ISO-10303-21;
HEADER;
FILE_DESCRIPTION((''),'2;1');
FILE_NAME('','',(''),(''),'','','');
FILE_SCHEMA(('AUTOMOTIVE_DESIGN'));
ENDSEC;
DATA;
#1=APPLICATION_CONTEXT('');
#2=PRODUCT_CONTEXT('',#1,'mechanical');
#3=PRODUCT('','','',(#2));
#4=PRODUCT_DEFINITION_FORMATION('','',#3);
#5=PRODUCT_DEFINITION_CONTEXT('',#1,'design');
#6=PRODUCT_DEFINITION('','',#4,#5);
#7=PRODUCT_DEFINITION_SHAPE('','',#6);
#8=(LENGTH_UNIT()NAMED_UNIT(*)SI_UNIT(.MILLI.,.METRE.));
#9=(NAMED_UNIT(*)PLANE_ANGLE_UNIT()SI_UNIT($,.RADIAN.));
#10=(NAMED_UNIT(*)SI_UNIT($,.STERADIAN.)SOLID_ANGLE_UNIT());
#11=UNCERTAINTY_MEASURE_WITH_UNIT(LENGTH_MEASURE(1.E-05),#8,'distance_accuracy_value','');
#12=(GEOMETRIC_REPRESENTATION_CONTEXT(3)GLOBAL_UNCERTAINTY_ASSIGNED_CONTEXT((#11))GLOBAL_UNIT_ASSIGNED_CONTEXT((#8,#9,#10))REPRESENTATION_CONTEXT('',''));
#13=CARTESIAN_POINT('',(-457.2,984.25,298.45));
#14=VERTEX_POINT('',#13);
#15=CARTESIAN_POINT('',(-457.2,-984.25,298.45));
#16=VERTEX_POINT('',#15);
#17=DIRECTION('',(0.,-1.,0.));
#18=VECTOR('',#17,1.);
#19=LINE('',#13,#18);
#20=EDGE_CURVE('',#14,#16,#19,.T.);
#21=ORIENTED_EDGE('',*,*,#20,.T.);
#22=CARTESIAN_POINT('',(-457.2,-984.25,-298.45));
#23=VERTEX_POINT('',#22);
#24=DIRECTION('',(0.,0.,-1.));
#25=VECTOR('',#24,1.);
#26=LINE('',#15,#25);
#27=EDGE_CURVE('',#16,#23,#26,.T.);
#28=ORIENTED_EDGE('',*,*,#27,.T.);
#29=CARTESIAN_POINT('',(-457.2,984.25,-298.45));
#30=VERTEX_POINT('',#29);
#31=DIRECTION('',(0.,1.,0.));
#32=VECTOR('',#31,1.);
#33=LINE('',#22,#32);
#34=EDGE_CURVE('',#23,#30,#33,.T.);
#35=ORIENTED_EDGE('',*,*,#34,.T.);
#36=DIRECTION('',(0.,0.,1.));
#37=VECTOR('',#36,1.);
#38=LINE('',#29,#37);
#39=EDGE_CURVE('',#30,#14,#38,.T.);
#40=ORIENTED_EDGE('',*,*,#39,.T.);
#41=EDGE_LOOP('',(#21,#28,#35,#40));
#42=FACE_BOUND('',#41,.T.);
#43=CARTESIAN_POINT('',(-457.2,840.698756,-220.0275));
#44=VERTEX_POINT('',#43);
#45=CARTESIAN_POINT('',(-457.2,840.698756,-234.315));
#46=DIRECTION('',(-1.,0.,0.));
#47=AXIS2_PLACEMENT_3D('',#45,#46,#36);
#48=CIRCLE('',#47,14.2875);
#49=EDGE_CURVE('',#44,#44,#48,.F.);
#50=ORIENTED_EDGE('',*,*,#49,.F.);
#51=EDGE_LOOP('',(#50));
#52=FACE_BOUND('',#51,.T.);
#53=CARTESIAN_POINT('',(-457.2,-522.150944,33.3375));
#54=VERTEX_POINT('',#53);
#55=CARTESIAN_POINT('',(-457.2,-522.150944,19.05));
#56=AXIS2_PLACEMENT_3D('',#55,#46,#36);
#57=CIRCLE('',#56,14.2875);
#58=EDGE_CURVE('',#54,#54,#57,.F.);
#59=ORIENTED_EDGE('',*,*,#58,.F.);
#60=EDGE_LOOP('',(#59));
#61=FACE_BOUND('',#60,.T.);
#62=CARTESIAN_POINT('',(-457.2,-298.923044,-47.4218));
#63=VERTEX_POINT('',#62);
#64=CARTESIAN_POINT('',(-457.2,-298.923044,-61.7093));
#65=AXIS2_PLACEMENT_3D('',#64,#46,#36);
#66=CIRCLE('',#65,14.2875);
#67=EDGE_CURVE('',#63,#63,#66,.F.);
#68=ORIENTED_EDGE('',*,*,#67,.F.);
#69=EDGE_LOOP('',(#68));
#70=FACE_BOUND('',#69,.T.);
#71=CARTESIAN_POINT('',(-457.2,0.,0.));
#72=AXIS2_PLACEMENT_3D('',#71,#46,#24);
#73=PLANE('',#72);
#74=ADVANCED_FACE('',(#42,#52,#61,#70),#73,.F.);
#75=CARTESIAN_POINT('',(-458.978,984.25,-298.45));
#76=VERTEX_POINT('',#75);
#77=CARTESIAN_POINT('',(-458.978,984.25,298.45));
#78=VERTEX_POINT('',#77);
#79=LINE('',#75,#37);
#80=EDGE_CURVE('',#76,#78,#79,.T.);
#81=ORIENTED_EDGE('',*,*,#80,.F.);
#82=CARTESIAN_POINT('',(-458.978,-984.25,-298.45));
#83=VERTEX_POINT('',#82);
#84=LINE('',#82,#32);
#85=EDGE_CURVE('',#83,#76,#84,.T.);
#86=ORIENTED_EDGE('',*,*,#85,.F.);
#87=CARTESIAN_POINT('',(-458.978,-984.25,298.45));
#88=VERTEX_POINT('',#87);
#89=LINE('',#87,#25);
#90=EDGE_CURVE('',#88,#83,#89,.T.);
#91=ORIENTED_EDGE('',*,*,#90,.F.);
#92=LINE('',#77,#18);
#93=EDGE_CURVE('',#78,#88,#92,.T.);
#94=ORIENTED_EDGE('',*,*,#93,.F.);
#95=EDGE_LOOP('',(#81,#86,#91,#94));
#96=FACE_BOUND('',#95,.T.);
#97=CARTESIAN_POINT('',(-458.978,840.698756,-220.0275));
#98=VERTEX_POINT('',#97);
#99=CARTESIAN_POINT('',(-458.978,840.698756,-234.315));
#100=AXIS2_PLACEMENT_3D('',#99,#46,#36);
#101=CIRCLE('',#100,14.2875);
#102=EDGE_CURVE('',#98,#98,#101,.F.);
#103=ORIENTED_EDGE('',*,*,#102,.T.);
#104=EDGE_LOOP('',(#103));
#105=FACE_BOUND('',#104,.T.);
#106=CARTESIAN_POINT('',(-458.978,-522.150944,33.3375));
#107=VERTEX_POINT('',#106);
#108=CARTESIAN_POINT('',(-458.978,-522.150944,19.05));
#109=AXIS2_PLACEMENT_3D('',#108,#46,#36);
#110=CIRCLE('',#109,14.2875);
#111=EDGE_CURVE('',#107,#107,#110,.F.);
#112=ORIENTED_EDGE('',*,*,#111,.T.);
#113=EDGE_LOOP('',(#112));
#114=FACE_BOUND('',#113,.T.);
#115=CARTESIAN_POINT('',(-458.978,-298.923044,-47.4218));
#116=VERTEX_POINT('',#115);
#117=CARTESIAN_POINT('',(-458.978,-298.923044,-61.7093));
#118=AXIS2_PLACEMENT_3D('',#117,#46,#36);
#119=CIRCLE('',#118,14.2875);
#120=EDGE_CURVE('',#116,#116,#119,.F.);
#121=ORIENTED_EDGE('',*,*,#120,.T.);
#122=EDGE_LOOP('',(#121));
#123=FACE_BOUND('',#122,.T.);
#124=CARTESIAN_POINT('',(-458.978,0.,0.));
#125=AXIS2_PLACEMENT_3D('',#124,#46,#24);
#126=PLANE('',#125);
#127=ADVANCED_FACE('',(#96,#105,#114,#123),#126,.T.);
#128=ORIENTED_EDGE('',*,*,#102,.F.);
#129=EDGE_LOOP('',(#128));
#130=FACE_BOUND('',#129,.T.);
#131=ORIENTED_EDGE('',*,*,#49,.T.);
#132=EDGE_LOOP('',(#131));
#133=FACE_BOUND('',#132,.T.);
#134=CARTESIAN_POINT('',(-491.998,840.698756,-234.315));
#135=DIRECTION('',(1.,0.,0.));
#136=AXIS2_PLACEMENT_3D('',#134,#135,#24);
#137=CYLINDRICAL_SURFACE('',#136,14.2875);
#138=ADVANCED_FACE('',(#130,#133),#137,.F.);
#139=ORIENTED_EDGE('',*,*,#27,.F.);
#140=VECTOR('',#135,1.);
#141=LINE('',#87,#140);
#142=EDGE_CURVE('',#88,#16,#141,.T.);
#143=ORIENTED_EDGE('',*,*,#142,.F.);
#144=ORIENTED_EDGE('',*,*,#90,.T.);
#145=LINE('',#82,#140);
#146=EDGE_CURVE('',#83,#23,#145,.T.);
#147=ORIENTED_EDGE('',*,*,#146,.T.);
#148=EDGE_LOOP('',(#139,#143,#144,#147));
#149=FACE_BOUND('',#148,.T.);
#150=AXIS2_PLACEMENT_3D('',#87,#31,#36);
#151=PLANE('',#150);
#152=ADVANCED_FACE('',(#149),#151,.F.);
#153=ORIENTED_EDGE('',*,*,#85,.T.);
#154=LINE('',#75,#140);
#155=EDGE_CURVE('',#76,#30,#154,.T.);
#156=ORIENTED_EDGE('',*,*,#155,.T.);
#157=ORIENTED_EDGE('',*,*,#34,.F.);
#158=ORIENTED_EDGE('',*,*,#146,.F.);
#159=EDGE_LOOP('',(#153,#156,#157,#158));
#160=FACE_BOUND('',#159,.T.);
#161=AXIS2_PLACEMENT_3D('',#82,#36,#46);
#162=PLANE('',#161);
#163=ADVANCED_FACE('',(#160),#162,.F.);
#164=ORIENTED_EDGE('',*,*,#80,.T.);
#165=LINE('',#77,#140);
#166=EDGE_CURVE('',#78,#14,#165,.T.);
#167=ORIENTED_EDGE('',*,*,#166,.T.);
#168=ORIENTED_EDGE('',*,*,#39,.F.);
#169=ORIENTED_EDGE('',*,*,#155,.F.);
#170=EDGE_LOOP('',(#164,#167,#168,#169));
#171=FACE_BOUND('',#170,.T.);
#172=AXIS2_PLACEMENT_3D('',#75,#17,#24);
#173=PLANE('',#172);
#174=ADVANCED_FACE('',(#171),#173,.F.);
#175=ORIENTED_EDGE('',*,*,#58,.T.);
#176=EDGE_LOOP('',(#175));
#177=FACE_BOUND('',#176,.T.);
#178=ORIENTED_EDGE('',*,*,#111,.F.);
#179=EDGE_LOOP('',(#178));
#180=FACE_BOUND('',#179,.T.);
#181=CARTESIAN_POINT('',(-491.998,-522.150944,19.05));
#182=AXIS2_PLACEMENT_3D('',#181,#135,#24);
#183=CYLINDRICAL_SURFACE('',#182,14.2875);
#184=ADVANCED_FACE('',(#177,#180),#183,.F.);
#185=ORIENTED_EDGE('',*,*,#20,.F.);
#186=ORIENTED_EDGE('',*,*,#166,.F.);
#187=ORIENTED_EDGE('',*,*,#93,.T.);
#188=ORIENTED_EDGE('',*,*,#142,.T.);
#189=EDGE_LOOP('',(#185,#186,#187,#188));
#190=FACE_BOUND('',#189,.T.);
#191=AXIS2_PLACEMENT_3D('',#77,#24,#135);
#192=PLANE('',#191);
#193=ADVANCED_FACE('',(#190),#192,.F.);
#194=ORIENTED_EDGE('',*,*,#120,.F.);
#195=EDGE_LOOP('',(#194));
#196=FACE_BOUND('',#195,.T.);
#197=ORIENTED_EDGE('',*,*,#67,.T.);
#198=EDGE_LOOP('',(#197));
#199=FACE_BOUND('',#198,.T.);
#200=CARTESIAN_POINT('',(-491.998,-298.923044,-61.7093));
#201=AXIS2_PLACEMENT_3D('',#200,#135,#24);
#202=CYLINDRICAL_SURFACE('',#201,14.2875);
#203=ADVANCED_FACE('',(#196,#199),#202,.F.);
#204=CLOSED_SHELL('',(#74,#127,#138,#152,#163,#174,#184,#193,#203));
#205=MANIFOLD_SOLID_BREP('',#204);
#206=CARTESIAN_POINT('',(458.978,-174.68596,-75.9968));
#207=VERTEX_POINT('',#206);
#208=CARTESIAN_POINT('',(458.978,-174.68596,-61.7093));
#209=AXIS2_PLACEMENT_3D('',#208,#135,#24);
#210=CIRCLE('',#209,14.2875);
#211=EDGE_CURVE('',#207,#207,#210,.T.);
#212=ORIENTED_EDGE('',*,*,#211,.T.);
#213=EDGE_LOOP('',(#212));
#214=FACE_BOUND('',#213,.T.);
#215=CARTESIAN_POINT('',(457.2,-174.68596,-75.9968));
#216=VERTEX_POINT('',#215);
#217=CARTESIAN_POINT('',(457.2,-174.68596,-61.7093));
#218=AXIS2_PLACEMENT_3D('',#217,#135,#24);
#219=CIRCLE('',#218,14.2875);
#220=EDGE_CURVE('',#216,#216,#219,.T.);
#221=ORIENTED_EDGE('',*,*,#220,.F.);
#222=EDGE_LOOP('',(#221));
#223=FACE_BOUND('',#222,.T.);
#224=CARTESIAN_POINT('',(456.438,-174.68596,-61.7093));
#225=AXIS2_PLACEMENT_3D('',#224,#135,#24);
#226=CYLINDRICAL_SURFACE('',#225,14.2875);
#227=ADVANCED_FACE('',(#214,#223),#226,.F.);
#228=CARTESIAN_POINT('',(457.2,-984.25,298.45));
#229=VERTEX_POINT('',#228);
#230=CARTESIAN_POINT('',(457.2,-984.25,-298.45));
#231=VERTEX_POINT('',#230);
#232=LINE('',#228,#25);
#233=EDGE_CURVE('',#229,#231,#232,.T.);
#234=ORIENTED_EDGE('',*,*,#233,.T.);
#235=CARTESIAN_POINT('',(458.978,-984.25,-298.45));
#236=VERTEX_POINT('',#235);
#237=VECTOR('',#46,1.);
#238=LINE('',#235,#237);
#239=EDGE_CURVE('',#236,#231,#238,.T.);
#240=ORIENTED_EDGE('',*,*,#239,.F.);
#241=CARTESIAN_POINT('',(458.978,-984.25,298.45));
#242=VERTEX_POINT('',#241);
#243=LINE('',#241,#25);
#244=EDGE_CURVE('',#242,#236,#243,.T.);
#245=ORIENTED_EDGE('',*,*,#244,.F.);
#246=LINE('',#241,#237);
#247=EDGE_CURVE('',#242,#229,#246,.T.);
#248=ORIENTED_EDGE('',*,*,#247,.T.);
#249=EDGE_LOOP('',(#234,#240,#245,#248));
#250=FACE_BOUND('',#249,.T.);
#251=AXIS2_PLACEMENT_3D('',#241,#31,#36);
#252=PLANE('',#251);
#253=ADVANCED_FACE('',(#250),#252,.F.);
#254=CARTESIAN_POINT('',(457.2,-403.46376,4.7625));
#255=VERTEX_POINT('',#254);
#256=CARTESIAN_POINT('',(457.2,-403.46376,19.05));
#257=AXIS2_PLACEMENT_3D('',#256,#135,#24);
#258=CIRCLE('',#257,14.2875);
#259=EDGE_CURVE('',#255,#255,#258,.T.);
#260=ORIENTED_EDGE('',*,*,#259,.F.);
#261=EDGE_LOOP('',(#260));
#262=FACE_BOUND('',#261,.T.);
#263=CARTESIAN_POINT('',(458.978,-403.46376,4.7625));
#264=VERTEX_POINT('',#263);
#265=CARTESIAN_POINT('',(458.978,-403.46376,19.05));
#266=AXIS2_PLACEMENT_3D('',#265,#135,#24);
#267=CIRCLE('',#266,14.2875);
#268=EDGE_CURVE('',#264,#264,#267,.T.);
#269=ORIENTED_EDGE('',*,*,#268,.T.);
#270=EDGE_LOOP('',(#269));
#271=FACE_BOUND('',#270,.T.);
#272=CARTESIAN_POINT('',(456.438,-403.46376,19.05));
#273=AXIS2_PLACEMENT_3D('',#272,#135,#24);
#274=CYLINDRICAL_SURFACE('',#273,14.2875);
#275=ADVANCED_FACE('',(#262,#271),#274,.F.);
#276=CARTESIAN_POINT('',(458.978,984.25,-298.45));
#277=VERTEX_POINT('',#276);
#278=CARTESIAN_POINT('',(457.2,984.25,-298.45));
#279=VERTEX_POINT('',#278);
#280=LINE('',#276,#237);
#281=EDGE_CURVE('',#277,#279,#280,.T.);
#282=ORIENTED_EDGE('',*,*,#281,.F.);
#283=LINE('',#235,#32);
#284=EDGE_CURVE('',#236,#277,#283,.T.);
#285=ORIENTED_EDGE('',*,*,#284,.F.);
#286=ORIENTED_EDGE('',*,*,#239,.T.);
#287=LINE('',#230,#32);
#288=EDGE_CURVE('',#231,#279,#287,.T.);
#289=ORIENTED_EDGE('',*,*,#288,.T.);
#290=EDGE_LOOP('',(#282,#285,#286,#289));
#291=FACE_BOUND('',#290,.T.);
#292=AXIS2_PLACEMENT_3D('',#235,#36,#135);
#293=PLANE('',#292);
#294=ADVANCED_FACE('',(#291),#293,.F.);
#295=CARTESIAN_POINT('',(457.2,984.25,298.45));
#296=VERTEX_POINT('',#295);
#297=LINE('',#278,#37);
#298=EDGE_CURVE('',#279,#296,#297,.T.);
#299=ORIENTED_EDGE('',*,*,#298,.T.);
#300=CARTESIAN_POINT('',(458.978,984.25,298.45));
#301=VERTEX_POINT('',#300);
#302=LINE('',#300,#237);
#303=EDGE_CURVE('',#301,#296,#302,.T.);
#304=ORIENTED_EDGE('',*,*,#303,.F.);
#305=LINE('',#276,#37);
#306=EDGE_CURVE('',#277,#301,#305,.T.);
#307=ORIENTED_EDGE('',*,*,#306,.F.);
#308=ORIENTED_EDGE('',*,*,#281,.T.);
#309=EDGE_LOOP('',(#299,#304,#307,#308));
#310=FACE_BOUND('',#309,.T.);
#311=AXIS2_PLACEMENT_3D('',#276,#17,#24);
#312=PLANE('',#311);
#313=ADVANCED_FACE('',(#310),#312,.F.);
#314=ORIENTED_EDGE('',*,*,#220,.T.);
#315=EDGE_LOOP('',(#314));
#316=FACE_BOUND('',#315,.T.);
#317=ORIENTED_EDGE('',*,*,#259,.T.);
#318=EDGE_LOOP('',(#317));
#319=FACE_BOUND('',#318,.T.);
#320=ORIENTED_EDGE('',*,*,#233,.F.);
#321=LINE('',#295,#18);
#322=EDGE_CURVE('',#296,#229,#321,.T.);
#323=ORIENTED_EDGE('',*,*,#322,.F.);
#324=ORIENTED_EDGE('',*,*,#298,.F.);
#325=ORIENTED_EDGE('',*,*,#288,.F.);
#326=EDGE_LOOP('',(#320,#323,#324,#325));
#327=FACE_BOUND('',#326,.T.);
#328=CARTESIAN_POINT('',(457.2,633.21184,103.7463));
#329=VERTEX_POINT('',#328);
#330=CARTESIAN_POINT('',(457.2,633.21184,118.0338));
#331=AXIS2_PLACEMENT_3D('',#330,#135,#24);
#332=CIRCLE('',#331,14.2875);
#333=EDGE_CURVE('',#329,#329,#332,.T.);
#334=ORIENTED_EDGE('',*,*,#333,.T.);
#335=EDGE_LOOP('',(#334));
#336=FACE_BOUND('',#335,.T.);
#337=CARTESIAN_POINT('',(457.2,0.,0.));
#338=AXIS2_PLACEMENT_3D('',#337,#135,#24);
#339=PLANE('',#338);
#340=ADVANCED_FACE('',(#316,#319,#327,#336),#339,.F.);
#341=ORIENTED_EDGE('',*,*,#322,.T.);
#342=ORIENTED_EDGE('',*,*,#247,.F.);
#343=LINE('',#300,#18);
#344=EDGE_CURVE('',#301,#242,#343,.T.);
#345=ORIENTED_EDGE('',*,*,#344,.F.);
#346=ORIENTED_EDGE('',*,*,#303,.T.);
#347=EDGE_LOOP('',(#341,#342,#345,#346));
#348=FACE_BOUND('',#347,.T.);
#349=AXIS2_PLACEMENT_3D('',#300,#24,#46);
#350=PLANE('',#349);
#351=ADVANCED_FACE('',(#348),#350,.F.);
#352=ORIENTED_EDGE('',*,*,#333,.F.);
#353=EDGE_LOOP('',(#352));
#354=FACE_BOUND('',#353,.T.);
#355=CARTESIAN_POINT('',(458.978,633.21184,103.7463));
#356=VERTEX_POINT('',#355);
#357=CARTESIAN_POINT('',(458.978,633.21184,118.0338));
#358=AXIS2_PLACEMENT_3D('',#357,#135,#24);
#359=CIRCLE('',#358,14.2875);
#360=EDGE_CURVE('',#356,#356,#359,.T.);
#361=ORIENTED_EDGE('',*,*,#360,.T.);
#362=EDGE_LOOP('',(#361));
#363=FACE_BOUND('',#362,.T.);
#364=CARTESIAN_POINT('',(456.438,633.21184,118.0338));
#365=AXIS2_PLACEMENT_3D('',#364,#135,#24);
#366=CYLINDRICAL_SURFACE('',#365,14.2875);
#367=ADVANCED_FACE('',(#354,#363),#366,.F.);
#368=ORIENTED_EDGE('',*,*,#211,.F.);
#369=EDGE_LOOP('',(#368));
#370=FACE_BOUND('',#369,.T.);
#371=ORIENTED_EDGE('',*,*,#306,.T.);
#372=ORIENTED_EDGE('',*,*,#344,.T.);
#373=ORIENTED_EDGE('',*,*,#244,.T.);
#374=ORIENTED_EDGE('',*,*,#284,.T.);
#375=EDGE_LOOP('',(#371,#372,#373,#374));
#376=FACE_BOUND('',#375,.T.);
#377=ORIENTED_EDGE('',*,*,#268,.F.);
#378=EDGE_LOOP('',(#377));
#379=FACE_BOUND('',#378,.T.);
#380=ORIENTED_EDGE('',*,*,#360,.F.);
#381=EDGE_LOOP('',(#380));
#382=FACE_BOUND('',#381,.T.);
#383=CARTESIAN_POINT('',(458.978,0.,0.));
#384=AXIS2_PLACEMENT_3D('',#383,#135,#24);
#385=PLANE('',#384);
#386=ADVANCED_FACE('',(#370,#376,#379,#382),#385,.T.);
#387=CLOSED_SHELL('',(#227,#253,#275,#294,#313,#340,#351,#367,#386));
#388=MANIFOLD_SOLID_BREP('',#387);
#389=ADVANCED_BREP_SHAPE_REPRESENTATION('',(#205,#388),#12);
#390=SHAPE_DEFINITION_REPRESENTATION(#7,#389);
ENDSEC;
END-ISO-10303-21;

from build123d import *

# Parameters (mm, degrees)
BOSS_EXTRUDE1_OUTLINE_W = 596.9
BOSS_EXTRUDE1_OUTLINE_H = 1968.5
BOSS_EXTRUDE1_DEPTH     = 1.778
SKETCH3_R               = 14.2875
CUT_EXTRUDE1_DEPTH      = 2.54
CUT_EXTRUDE2_DEPTH      = 34.798
CUT_EXTRUDE2_DEPTH_BACK = 16.002
SKETCH4_R               = 14.2875


# Read off the part's stored shape, not the designer's step: Boss-Extrude1
with BuildPart() as part:
    # Boss-Extrude1 outline → Boss-Extrude1 (new body)
    with BuildSketch(Plane(origin=(457.2, 0, 0), x_dir=(0, 0, -1), z_dir=(1, 0, 0))):
        Rectangle(BOSS_EXTRUDE1_OUTLINE_W, BOSS_EXTRUDE1_OUTLINE_H)
    extrude(amount=BOSS_EXTRUDE1_DEPTH)


with BuildPart() as body_2:
    # Mirror7: mirrored copy
    add(part.part.mirror(Plane(origin=(0, 0, 0), x_dir=(0, 0, 1), z_dir=(1, 0, 0))))

    # Sketch4 → Cut-Extrude2 (cut, two sides: drawn at the far end of the back side and taken through both)
    with BuildSketch(Plane.ZY.offset(457.2).offset(-CUT_EXTRUDE2_DEPTH_BACK)):
        with Locations((-234.315, 840.698755889)):
            Circle(SKETCH4_R)
        with Locations((-61.7093, -298.923044111)):
            Circle(SKETCH4_R)
        with Locations((19.05, -522.150944111)):
            Circle(SKETCH4_R)
    extrude(amount=CUT_EXTRUDE2_DEPTH + CUT_EXTRUDE2_DEPTH_BACK, mode=Mode.SUBTRACT)


with BuildPart() as part_1:
    add(part.part)

    # Sketch3 → Cut-Extrude1 (cut)
    with BuildSketch(Plane(origin=(458.978, 0, 0), x_dir=(0, 0, -1), z_dir=(1, 0, 0))):
        with Locations((61.7093, -174.68596)):
            Circle(SKETCH3_R)
        with Locations((-19.05, -403.46376)):
            Circle(SKETCH3_R)
        with Locations((-118.0338, 633.21184)):
            Circle(SKETCH3_R)
    extrude(amount=-CUT_EXTRUDE1_DEPTH, mode=Mode.SUBTRACT)


solid = Compound([body_2.part, part_1.part])
